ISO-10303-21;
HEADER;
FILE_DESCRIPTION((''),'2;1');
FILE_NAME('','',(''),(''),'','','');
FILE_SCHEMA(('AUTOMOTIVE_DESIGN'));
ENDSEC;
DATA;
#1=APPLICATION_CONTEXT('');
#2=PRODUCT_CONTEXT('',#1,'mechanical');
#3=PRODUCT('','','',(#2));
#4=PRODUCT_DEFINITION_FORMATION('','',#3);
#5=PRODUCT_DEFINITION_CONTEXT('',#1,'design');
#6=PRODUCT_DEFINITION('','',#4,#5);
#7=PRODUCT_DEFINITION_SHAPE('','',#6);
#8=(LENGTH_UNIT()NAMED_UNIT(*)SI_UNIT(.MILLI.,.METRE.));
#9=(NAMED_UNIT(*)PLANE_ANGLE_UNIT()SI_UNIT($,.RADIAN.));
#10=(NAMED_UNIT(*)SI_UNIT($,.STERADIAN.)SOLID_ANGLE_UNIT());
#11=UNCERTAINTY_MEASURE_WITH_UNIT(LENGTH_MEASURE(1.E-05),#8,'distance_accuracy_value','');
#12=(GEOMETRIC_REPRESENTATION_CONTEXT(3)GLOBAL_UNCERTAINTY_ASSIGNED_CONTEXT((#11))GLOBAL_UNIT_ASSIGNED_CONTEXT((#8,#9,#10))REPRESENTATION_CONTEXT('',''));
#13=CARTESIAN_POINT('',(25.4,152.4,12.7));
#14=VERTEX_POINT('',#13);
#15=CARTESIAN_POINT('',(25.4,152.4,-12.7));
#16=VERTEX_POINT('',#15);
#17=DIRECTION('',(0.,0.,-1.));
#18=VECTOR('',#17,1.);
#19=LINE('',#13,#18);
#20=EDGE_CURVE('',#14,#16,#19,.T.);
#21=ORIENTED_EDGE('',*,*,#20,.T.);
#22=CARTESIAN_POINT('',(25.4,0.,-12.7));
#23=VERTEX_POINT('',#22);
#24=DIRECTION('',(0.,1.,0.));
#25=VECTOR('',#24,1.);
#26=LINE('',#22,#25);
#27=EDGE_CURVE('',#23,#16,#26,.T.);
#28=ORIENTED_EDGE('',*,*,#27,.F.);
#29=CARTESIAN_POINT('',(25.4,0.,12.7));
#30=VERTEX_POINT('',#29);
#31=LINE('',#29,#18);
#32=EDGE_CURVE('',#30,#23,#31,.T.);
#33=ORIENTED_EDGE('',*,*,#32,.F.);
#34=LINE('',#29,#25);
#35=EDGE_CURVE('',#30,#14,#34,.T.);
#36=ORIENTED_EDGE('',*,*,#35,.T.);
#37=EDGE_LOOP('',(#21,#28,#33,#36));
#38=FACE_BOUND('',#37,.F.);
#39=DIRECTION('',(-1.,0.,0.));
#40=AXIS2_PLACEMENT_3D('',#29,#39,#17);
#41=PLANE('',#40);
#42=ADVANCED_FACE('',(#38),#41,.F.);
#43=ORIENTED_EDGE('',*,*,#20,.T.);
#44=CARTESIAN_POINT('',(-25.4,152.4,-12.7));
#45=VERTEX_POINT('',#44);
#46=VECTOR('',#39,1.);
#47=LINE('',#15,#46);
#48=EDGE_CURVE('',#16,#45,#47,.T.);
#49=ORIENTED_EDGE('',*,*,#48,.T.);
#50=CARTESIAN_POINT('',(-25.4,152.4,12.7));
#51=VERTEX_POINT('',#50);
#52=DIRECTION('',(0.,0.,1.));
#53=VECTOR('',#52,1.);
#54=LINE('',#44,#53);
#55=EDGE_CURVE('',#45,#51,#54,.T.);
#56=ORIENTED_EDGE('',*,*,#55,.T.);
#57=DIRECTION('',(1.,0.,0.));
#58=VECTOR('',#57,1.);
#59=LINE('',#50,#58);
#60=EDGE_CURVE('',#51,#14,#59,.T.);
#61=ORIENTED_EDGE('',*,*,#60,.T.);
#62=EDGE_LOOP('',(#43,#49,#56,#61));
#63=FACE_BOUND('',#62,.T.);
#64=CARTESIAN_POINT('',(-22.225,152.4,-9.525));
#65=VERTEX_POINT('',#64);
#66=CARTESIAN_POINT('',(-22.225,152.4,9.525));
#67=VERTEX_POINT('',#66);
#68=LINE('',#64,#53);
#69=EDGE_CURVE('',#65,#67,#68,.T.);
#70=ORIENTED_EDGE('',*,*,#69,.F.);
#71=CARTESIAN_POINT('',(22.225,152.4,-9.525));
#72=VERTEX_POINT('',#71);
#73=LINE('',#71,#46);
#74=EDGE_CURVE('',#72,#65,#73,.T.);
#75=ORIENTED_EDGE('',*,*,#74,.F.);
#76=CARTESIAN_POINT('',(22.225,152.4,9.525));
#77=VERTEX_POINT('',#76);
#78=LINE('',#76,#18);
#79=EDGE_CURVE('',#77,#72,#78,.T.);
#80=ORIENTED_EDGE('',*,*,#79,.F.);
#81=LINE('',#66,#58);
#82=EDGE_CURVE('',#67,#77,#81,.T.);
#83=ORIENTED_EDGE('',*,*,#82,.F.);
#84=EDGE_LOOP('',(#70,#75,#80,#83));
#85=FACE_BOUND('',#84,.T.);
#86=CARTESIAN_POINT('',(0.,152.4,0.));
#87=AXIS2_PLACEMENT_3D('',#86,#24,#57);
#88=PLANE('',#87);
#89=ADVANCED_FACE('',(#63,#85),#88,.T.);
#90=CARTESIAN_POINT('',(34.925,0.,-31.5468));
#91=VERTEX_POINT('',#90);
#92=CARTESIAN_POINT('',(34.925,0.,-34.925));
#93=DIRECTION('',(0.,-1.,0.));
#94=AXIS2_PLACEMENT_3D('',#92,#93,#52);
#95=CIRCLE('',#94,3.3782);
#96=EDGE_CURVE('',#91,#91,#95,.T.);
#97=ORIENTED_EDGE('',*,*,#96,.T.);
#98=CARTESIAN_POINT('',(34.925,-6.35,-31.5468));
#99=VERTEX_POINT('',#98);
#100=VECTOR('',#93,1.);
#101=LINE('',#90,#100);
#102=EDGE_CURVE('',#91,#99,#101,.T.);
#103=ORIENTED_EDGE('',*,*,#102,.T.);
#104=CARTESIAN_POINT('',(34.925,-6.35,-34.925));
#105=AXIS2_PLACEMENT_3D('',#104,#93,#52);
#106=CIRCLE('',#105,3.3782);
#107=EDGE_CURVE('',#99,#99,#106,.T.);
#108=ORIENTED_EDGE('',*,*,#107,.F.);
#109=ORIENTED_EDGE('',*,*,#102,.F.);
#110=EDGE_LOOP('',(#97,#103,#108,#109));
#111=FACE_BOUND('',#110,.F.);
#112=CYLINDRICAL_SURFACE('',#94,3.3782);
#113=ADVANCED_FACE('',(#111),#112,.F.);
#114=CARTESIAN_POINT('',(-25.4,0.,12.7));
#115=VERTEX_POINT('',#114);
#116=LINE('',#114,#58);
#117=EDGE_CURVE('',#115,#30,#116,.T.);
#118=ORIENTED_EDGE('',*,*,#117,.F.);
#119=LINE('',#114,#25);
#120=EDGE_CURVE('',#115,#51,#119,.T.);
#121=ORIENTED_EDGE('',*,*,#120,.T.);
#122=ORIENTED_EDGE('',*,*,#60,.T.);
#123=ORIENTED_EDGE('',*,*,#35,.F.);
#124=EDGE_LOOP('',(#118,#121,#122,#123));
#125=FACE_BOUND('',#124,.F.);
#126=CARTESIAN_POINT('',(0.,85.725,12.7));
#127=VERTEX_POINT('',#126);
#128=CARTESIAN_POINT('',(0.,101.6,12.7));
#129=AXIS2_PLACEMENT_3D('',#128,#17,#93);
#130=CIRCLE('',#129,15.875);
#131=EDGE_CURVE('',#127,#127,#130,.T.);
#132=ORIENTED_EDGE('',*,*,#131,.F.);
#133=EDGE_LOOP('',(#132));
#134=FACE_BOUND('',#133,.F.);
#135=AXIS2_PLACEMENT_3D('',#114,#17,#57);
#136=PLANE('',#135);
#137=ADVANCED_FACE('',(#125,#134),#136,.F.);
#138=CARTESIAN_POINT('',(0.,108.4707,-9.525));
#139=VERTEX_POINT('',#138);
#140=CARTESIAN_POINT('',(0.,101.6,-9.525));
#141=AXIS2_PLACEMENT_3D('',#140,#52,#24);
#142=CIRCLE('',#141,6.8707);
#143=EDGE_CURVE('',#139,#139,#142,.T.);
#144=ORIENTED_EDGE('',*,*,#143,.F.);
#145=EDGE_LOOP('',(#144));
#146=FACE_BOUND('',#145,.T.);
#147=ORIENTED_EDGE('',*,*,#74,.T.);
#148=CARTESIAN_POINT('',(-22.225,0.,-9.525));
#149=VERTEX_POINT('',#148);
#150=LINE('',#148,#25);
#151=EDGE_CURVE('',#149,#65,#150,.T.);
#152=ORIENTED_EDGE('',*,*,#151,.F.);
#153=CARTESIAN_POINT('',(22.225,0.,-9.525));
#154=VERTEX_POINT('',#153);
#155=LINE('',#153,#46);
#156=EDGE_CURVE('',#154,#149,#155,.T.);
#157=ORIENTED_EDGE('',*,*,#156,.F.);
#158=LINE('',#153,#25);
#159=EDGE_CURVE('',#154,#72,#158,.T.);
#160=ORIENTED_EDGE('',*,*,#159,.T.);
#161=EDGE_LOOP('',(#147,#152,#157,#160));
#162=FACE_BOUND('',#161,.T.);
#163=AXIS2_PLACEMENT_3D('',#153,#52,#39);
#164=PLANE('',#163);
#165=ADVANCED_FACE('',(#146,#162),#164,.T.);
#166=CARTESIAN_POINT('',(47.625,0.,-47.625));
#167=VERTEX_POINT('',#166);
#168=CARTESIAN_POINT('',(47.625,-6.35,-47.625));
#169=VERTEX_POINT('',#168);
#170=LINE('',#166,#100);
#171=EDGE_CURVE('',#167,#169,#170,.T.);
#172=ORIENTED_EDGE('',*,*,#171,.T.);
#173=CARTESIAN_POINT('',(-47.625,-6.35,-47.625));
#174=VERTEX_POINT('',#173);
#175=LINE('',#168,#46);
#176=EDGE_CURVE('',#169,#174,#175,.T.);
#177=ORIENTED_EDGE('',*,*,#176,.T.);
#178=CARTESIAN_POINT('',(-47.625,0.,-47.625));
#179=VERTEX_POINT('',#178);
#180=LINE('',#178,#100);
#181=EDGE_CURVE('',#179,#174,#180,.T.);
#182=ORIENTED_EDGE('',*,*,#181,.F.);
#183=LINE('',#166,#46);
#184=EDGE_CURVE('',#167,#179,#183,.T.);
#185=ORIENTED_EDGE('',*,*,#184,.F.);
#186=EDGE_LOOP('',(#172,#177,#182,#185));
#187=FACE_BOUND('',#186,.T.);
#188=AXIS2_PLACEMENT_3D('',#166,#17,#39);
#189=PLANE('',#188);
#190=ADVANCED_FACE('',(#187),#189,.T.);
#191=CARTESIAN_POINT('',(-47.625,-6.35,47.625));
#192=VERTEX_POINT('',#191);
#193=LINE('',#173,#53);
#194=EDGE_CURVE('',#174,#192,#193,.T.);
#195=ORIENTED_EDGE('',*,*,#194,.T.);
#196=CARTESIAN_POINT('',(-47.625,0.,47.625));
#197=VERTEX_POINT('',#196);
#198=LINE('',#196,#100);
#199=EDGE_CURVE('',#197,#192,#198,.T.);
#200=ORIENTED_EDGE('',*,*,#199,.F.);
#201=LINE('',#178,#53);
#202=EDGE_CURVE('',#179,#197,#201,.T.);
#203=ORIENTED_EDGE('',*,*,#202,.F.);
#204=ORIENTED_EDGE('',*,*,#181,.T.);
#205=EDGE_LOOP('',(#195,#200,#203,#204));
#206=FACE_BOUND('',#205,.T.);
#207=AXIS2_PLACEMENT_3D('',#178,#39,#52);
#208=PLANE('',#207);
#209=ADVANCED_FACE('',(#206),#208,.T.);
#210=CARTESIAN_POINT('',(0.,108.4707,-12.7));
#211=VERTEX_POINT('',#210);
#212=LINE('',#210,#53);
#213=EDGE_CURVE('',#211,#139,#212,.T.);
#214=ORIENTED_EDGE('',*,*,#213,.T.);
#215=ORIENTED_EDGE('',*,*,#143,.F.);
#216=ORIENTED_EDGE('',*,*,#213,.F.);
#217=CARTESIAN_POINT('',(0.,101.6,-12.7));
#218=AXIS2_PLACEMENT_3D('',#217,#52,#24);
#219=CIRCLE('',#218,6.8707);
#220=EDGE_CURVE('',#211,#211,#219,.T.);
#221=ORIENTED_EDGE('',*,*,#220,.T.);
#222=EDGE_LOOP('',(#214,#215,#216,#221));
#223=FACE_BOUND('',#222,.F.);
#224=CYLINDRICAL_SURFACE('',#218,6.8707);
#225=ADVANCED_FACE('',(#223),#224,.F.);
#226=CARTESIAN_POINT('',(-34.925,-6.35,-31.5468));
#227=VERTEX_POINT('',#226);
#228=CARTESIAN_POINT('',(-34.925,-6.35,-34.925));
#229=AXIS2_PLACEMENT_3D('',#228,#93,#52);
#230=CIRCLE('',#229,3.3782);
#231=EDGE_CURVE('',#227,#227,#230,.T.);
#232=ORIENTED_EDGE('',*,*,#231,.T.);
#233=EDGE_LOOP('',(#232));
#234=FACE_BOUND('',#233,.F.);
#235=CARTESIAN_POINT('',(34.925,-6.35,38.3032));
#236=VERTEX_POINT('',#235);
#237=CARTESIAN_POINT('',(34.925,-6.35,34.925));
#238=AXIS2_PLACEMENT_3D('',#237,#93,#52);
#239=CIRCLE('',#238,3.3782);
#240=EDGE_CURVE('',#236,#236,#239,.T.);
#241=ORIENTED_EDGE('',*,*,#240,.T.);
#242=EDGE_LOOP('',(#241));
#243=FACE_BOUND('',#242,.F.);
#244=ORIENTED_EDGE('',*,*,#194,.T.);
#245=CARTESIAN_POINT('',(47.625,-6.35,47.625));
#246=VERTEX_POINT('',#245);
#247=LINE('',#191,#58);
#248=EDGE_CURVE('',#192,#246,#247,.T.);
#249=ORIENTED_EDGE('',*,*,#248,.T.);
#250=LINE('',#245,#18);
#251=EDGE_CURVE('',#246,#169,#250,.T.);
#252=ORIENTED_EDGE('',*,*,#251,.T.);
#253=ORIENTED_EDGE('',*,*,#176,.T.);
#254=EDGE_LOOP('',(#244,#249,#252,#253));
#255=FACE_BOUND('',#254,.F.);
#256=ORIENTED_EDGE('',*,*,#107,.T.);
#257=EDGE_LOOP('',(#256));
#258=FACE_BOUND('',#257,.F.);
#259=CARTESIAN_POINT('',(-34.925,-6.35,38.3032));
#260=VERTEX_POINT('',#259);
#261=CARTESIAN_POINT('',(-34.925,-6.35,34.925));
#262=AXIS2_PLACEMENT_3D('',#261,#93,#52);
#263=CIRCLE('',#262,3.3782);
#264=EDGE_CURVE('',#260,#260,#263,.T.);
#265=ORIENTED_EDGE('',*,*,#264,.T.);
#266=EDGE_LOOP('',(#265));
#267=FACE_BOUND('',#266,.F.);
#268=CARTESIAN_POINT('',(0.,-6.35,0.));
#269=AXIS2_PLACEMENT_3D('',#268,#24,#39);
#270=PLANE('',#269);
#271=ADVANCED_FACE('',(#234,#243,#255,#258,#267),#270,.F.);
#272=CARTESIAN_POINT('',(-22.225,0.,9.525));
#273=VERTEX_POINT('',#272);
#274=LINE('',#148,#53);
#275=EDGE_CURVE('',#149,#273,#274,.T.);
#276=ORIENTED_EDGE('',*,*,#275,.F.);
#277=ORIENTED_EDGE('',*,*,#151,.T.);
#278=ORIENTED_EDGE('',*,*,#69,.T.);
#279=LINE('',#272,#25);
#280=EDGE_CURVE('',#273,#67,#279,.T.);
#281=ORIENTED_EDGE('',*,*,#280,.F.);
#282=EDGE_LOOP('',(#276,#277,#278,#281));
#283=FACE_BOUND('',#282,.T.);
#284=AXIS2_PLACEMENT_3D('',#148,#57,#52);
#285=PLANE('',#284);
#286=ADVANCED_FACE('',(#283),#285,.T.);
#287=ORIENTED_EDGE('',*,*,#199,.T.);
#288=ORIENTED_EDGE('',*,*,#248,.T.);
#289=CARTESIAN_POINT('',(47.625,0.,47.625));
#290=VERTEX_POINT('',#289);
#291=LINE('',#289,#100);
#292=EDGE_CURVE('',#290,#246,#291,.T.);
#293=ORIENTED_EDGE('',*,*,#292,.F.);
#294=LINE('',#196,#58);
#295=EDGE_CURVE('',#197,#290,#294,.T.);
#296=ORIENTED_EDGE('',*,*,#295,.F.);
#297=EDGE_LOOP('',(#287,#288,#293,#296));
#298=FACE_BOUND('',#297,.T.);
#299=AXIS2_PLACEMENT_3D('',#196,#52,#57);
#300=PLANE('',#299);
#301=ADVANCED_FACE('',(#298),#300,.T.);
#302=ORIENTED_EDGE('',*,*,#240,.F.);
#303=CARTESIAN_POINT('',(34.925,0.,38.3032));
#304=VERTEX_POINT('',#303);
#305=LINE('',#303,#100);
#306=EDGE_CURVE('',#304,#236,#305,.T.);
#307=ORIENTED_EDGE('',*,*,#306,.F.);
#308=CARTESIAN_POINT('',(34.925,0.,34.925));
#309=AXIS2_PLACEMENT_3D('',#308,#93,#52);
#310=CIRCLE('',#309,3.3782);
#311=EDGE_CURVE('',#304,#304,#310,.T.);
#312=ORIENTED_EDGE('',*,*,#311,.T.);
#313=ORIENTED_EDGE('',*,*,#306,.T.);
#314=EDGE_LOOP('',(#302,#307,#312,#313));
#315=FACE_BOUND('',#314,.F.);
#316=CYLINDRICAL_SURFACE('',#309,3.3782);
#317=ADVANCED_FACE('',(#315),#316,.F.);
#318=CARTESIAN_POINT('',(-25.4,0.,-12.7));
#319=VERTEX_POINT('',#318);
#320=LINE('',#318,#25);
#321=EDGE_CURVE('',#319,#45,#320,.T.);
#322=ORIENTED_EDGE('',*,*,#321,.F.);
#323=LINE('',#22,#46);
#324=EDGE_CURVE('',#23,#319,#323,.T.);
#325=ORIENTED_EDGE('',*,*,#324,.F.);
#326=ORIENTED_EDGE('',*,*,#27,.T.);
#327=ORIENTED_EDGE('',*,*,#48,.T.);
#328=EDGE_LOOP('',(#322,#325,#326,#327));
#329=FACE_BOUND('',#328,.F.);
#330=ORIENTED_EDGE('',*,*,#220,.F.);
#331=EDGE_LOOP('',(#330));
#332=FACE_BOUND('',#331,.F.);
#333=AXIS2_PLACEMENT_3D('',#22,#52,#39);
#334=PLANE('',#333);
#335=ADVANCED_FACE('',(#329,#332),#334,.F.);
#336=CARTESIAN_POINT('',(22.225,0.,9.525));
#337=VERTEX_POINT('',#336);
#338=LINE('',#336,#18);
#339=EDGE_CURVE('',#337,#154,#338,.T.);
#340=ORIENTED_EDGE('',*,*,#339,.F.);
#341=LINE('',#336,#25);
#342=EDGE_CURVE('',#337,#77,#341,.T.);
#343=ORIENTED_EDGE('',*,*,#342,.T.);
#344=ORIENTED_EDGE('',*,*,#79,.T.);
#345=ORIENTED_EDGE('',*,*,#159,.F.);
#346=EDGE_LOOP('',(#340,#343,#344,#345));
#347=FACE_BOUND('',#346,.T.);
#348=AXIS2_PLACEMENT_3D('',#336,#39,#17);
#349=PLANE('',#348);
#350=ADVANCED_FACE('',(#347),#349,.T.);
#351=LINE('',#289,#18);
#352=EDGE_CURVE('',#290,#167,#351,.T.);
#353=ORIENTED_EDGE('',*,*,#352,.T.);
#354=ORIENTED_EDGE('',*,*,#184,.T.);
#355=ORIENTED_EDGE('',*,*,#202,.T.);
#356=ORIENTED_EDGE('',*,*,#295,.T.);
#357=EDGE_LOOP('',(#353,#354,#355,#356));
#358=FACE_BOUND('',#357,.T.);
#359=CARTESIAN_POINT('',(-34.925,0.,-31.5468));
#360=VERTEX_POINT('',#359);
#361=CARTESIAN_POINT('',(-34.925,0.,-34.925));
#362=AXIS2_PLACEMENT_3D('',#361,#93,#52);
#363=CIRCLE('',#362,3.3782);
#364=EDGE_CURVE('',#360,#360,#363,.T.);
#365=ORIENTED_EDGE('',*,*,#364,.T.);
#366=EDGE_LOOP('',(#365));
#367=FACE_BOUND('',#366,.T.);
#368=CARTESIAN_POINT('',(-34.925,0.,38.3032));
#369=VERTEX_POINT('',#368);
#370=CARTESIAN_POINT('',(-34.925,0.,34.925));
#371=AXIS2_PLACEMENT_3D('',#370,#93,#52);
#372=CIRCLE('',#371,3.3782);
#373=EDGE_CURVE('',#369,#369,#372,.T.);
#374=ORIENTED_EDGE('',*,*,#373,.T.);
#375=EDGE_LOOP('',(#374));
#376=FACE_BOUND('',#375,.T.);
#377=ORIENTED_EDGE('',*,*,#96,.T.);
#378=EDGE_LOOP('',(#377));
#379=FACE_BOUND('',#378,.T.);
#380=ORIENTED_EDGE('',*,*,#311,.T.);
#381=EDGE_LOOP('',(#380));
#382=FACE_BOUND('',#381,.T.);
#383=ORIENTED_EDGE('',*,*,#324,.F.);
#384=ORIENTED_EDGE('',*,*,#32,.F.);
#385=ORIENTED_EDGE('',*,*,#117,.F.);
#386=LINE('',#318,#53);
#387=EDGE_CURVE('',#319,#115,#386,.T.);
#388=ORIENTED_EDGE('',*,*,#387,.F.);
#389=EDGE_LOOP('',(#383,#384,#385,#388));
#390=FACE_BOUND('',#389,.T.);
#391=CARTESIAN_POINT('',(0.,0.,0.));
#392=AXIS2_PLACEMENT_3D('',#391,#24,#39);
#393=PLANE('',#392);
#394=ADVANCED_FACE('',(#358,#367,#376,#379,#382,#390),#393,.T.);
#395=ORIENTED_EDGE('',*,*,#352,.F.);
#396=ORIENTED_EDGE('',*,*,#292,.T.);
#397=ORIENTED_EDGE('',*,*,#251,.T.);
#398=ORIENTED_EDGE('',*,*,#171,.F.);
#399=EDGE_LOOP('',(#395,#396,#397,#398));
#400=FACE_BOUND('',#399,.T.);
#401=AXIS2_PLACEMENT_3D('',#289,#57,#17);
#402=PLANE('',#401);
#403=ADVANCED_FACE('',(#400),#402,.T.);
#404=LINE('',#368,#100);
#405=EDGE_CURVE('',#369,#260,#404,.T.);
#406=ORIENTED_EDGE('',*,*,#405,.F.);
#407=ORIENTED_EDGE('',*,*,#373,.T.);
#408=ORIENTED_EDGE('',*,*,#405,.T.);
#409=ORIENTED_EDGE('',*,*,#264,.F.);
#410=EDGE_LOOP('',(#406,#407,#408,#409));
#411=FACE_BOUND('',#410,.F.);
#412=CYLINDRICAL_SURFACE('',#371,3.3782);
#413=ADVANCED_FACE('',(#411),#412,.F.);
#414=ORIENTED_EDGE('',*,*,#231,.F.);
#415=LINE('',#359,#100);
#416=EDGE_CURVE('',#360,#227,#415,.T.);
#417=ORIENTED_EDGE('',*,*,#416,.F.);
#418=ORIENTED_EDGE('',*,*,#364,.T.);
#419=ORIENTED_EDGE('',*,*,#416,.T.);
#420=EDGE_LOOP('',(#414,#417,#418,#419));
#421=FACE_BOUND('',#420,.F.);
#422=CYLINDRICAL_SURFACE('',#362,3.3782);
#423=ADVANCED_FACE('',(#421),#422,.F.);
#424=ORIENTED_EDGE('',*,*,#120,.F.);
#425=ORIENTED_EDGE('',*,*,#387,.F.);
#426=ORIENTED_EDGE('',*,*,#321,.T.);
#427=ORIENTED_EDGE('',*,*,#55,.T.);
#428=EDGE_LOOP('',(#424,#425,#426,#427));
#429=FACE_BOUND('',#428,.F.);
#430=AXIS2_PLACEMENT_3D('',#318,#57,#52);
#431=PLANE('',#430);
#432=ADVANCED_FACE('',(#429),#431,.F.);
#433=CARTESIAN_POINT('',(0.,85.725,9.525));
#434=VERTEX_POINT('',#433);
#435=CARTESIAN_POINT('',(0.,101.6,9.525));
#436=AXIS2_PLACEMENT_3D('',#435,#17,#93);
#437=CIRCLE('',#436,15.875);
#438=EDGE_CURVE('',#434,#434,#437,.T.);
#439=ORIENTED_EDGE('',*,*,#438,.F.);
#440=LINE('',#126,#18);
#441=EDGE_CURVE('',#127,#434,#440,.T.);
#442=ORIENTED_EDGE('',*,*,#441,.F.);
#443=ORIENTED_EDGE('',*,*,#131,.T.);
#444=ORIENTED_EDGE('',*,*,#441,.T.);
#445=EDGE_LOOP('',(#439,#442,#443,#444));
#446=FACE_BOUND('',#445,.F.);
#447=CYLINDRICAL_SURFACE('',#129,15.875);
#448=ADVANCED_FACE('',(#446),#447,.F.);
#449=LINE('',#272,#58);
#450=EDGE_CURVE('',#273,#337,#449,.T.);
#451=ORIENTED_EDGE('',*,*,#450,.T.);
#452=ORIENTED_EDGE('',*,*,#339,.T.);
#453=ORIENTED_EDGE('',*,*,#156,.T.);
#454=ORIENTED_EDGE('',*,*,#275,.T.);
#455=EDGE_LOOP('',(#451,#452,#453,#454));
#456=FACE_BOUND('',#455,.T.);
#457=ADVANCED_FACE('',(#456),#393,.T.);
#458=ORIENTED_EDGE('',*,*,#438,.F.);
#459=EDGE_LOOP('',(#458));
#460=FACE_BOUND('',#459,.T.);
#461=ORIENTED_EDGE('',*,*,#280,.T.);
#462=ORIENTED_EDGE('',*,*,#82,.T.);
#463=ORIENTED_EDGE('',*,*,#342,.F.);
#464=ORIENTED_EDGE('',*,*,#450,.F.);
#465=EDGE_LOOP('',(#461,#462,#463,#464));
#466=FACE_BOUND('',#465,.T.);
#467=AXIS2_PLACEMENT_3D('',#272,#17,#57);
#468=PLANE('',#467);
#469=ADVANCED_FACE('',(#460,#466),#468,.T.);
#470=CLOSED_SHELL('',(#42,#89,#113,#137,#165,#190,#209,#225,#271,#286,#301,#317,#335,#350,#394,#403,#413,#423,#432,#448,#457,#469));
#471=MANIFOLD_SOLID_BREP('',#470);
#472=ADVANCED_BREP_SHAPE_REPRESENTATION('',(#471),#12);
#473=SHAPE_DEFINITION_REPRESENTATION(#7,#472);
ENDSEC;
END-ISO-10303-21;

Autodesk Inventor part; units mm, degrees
ref_plane "YZ Plane" through (0, 0, 0) normal (1, 0, 0) x (0, 1, 0)
ref_plane "XZ Plane" through (0, 0, 0) normal (0, 1, 0) x (-1, 0, 0)
ref_plane "XY Plane" through (0, 0, 0) normal (0, 0, 1) x (1, 0, 0)
sketch "Sketch1" plane through (0, 0, 0) normal (0, 1, 0) x (-1, 0, 0)
  line L0 (47.625, 47.625) -> (-47.625, 47.625)
  line L1 (-47.625, 47.625) -> (-47.625, -47.625)
  line L2 (-47.625, -47.625) -> (47.625, -47.625)
  line L3 (47.625, -47.625) -> (47.625, 47.625)
  line L4 (47.625, 47.625) -> (-47.625, -47.625) construction
  line L5 (-47.625, 47.625) -> (47.625, -47.625) construction
  point P0 (0, 0)
  dimension "d0" = 95.25
extrude "Extrusion1" add sketch "Sketch1" against normal blind 6.35
sketch "Sketch2" plane through (0, 0, 0) normal (0, 1, 0) x (1, 0, 0)
  line L0 (-25.4, -12.7) -> (25.4, -12.7)
  line L1 (25.4, -12.7) -> (25.4, 12.7)
  line L2 (25.4, 12.7) -> (-25.4, 12.7)
  line L3 (-25.4, 12.7) -> (-25.4, -12.7)
  line L4 (-25.4, -12.7) -> (25.4, 12.7) construction
  line L5 (25.4, -12.7) -> (-25.4, 12.7) construction
  line L6 (-22.225, -9.525) -> (22.225, -9.525)
  line L7 (22.225, -9.525) -> (22.225, 9.525)
  line L8 (22.225, 9.525) -> (-22.225, 9.525)
  line L9 (-22.225, 9.525) -> (-22.225, -9.525)
  line L10 (-22.225, -9.525) -> (22.225, 9.525) construction
  line L11 (22.225, -9.525) -> (-22.225, 9.525) construction
  point P0 (0, 0)
  dimension "d3" = 50.8
  dimension "d4" = 25.4
  dimension "d5" = 3.175
  dimension "d6" = 3.175
extrude "Extrusion2" add sketch "Sketch2" along normal blind 152.4
sketch "Sketch3" plane through (-25.4, 0, 12.7) normal (0, 0, 1) x (1, 0, 0)
  line L0 (25.4, 0) -> (25.4, 152.4) construction
  line L1 (0, 152.4) -> (50.8, 152.4) construction
  line L2 (-22.225, 0) -> (73.025, 0) construction
  point P0 (25.4, 101.6)
  dimension "d9" = 101.6
hole "Hole1" at (0, 101.6, 12.7) direction (0, 0, -1) diameter 31.75 end up to surface
sketch "Sketch4" plane through (25.4, 0, -12.7) normal (0, 0, -1) x (-1, 0, 0)
  line L0 (25.4, 0) -> (25.4, 152.4) construction
  line L1 (50.8, 152.4) -> (0, 152.4) construction
  circle A0 centre (25.4, 101.6) radius 15.875 projected
hole "Hole2" at (0, 101.6, -12.7) direction (0, 0, 1) diameter 13.7414 end up to surface
sketch "Sketch5" plane through (0, 0, 0) normal (0, 1, 0) x (1, 0, 0)
  line L0 (-34.925, -34.925) -> (34.925, -34.925) construction
  line L1 (34.925, -34.925) -> (34.925, 34.925) construction
  line L2 (34.925, 34.925) -> (-34.925, 34.925) construction
  line L3 (-34.925, 34.925) -> (-34.925, -34.925) construction
  line L4 (-34.925, -34.925) -> (34.925, 34.925) construction
  line L5 (34.925, -34.925) -> (-34.925, 34.925) construction
  line L6 (-47.625, 47.625) -> (-47.625, -47.625) projected
  line L7 (47.625, 47.625) -> (-47.625, 47.625) projected
  point P0 (0, 0)
  dimension "d25" = 12.7
  dimension "d26" = 12.7
hole "Hole3" at (-34.925, 0, -34.925) at (34.925, 0, -34.925) at (34.925, 0, 34.925) at (-34.925, 0, 34.925) direction (0, -1, 0) diameter 6.7564 end through all clearance for "Flat Head Machine Screw (82)" size "1/4" standard "Ansi Unified Screw Threads"
equation "\"d1\" = baseMaterialThickness"
equation "\"d5\" = postMaterialThickness"
equation "\"d6\" = postMaterialThickness"
equation "\"d10\" = flangeBearingHoleDiam"
equation "\"flangeBearingHoleDiam\" = 31.75"
equation "\"heightOfRod\" = 101.6"
equation "\"hightOfPost\" = 152.4"
equation "\"postMaterialThickness\" = 3.175"
equation "\"baseMaterialThickness\" = 6.35"
properties part number "ThunderhexPost"
